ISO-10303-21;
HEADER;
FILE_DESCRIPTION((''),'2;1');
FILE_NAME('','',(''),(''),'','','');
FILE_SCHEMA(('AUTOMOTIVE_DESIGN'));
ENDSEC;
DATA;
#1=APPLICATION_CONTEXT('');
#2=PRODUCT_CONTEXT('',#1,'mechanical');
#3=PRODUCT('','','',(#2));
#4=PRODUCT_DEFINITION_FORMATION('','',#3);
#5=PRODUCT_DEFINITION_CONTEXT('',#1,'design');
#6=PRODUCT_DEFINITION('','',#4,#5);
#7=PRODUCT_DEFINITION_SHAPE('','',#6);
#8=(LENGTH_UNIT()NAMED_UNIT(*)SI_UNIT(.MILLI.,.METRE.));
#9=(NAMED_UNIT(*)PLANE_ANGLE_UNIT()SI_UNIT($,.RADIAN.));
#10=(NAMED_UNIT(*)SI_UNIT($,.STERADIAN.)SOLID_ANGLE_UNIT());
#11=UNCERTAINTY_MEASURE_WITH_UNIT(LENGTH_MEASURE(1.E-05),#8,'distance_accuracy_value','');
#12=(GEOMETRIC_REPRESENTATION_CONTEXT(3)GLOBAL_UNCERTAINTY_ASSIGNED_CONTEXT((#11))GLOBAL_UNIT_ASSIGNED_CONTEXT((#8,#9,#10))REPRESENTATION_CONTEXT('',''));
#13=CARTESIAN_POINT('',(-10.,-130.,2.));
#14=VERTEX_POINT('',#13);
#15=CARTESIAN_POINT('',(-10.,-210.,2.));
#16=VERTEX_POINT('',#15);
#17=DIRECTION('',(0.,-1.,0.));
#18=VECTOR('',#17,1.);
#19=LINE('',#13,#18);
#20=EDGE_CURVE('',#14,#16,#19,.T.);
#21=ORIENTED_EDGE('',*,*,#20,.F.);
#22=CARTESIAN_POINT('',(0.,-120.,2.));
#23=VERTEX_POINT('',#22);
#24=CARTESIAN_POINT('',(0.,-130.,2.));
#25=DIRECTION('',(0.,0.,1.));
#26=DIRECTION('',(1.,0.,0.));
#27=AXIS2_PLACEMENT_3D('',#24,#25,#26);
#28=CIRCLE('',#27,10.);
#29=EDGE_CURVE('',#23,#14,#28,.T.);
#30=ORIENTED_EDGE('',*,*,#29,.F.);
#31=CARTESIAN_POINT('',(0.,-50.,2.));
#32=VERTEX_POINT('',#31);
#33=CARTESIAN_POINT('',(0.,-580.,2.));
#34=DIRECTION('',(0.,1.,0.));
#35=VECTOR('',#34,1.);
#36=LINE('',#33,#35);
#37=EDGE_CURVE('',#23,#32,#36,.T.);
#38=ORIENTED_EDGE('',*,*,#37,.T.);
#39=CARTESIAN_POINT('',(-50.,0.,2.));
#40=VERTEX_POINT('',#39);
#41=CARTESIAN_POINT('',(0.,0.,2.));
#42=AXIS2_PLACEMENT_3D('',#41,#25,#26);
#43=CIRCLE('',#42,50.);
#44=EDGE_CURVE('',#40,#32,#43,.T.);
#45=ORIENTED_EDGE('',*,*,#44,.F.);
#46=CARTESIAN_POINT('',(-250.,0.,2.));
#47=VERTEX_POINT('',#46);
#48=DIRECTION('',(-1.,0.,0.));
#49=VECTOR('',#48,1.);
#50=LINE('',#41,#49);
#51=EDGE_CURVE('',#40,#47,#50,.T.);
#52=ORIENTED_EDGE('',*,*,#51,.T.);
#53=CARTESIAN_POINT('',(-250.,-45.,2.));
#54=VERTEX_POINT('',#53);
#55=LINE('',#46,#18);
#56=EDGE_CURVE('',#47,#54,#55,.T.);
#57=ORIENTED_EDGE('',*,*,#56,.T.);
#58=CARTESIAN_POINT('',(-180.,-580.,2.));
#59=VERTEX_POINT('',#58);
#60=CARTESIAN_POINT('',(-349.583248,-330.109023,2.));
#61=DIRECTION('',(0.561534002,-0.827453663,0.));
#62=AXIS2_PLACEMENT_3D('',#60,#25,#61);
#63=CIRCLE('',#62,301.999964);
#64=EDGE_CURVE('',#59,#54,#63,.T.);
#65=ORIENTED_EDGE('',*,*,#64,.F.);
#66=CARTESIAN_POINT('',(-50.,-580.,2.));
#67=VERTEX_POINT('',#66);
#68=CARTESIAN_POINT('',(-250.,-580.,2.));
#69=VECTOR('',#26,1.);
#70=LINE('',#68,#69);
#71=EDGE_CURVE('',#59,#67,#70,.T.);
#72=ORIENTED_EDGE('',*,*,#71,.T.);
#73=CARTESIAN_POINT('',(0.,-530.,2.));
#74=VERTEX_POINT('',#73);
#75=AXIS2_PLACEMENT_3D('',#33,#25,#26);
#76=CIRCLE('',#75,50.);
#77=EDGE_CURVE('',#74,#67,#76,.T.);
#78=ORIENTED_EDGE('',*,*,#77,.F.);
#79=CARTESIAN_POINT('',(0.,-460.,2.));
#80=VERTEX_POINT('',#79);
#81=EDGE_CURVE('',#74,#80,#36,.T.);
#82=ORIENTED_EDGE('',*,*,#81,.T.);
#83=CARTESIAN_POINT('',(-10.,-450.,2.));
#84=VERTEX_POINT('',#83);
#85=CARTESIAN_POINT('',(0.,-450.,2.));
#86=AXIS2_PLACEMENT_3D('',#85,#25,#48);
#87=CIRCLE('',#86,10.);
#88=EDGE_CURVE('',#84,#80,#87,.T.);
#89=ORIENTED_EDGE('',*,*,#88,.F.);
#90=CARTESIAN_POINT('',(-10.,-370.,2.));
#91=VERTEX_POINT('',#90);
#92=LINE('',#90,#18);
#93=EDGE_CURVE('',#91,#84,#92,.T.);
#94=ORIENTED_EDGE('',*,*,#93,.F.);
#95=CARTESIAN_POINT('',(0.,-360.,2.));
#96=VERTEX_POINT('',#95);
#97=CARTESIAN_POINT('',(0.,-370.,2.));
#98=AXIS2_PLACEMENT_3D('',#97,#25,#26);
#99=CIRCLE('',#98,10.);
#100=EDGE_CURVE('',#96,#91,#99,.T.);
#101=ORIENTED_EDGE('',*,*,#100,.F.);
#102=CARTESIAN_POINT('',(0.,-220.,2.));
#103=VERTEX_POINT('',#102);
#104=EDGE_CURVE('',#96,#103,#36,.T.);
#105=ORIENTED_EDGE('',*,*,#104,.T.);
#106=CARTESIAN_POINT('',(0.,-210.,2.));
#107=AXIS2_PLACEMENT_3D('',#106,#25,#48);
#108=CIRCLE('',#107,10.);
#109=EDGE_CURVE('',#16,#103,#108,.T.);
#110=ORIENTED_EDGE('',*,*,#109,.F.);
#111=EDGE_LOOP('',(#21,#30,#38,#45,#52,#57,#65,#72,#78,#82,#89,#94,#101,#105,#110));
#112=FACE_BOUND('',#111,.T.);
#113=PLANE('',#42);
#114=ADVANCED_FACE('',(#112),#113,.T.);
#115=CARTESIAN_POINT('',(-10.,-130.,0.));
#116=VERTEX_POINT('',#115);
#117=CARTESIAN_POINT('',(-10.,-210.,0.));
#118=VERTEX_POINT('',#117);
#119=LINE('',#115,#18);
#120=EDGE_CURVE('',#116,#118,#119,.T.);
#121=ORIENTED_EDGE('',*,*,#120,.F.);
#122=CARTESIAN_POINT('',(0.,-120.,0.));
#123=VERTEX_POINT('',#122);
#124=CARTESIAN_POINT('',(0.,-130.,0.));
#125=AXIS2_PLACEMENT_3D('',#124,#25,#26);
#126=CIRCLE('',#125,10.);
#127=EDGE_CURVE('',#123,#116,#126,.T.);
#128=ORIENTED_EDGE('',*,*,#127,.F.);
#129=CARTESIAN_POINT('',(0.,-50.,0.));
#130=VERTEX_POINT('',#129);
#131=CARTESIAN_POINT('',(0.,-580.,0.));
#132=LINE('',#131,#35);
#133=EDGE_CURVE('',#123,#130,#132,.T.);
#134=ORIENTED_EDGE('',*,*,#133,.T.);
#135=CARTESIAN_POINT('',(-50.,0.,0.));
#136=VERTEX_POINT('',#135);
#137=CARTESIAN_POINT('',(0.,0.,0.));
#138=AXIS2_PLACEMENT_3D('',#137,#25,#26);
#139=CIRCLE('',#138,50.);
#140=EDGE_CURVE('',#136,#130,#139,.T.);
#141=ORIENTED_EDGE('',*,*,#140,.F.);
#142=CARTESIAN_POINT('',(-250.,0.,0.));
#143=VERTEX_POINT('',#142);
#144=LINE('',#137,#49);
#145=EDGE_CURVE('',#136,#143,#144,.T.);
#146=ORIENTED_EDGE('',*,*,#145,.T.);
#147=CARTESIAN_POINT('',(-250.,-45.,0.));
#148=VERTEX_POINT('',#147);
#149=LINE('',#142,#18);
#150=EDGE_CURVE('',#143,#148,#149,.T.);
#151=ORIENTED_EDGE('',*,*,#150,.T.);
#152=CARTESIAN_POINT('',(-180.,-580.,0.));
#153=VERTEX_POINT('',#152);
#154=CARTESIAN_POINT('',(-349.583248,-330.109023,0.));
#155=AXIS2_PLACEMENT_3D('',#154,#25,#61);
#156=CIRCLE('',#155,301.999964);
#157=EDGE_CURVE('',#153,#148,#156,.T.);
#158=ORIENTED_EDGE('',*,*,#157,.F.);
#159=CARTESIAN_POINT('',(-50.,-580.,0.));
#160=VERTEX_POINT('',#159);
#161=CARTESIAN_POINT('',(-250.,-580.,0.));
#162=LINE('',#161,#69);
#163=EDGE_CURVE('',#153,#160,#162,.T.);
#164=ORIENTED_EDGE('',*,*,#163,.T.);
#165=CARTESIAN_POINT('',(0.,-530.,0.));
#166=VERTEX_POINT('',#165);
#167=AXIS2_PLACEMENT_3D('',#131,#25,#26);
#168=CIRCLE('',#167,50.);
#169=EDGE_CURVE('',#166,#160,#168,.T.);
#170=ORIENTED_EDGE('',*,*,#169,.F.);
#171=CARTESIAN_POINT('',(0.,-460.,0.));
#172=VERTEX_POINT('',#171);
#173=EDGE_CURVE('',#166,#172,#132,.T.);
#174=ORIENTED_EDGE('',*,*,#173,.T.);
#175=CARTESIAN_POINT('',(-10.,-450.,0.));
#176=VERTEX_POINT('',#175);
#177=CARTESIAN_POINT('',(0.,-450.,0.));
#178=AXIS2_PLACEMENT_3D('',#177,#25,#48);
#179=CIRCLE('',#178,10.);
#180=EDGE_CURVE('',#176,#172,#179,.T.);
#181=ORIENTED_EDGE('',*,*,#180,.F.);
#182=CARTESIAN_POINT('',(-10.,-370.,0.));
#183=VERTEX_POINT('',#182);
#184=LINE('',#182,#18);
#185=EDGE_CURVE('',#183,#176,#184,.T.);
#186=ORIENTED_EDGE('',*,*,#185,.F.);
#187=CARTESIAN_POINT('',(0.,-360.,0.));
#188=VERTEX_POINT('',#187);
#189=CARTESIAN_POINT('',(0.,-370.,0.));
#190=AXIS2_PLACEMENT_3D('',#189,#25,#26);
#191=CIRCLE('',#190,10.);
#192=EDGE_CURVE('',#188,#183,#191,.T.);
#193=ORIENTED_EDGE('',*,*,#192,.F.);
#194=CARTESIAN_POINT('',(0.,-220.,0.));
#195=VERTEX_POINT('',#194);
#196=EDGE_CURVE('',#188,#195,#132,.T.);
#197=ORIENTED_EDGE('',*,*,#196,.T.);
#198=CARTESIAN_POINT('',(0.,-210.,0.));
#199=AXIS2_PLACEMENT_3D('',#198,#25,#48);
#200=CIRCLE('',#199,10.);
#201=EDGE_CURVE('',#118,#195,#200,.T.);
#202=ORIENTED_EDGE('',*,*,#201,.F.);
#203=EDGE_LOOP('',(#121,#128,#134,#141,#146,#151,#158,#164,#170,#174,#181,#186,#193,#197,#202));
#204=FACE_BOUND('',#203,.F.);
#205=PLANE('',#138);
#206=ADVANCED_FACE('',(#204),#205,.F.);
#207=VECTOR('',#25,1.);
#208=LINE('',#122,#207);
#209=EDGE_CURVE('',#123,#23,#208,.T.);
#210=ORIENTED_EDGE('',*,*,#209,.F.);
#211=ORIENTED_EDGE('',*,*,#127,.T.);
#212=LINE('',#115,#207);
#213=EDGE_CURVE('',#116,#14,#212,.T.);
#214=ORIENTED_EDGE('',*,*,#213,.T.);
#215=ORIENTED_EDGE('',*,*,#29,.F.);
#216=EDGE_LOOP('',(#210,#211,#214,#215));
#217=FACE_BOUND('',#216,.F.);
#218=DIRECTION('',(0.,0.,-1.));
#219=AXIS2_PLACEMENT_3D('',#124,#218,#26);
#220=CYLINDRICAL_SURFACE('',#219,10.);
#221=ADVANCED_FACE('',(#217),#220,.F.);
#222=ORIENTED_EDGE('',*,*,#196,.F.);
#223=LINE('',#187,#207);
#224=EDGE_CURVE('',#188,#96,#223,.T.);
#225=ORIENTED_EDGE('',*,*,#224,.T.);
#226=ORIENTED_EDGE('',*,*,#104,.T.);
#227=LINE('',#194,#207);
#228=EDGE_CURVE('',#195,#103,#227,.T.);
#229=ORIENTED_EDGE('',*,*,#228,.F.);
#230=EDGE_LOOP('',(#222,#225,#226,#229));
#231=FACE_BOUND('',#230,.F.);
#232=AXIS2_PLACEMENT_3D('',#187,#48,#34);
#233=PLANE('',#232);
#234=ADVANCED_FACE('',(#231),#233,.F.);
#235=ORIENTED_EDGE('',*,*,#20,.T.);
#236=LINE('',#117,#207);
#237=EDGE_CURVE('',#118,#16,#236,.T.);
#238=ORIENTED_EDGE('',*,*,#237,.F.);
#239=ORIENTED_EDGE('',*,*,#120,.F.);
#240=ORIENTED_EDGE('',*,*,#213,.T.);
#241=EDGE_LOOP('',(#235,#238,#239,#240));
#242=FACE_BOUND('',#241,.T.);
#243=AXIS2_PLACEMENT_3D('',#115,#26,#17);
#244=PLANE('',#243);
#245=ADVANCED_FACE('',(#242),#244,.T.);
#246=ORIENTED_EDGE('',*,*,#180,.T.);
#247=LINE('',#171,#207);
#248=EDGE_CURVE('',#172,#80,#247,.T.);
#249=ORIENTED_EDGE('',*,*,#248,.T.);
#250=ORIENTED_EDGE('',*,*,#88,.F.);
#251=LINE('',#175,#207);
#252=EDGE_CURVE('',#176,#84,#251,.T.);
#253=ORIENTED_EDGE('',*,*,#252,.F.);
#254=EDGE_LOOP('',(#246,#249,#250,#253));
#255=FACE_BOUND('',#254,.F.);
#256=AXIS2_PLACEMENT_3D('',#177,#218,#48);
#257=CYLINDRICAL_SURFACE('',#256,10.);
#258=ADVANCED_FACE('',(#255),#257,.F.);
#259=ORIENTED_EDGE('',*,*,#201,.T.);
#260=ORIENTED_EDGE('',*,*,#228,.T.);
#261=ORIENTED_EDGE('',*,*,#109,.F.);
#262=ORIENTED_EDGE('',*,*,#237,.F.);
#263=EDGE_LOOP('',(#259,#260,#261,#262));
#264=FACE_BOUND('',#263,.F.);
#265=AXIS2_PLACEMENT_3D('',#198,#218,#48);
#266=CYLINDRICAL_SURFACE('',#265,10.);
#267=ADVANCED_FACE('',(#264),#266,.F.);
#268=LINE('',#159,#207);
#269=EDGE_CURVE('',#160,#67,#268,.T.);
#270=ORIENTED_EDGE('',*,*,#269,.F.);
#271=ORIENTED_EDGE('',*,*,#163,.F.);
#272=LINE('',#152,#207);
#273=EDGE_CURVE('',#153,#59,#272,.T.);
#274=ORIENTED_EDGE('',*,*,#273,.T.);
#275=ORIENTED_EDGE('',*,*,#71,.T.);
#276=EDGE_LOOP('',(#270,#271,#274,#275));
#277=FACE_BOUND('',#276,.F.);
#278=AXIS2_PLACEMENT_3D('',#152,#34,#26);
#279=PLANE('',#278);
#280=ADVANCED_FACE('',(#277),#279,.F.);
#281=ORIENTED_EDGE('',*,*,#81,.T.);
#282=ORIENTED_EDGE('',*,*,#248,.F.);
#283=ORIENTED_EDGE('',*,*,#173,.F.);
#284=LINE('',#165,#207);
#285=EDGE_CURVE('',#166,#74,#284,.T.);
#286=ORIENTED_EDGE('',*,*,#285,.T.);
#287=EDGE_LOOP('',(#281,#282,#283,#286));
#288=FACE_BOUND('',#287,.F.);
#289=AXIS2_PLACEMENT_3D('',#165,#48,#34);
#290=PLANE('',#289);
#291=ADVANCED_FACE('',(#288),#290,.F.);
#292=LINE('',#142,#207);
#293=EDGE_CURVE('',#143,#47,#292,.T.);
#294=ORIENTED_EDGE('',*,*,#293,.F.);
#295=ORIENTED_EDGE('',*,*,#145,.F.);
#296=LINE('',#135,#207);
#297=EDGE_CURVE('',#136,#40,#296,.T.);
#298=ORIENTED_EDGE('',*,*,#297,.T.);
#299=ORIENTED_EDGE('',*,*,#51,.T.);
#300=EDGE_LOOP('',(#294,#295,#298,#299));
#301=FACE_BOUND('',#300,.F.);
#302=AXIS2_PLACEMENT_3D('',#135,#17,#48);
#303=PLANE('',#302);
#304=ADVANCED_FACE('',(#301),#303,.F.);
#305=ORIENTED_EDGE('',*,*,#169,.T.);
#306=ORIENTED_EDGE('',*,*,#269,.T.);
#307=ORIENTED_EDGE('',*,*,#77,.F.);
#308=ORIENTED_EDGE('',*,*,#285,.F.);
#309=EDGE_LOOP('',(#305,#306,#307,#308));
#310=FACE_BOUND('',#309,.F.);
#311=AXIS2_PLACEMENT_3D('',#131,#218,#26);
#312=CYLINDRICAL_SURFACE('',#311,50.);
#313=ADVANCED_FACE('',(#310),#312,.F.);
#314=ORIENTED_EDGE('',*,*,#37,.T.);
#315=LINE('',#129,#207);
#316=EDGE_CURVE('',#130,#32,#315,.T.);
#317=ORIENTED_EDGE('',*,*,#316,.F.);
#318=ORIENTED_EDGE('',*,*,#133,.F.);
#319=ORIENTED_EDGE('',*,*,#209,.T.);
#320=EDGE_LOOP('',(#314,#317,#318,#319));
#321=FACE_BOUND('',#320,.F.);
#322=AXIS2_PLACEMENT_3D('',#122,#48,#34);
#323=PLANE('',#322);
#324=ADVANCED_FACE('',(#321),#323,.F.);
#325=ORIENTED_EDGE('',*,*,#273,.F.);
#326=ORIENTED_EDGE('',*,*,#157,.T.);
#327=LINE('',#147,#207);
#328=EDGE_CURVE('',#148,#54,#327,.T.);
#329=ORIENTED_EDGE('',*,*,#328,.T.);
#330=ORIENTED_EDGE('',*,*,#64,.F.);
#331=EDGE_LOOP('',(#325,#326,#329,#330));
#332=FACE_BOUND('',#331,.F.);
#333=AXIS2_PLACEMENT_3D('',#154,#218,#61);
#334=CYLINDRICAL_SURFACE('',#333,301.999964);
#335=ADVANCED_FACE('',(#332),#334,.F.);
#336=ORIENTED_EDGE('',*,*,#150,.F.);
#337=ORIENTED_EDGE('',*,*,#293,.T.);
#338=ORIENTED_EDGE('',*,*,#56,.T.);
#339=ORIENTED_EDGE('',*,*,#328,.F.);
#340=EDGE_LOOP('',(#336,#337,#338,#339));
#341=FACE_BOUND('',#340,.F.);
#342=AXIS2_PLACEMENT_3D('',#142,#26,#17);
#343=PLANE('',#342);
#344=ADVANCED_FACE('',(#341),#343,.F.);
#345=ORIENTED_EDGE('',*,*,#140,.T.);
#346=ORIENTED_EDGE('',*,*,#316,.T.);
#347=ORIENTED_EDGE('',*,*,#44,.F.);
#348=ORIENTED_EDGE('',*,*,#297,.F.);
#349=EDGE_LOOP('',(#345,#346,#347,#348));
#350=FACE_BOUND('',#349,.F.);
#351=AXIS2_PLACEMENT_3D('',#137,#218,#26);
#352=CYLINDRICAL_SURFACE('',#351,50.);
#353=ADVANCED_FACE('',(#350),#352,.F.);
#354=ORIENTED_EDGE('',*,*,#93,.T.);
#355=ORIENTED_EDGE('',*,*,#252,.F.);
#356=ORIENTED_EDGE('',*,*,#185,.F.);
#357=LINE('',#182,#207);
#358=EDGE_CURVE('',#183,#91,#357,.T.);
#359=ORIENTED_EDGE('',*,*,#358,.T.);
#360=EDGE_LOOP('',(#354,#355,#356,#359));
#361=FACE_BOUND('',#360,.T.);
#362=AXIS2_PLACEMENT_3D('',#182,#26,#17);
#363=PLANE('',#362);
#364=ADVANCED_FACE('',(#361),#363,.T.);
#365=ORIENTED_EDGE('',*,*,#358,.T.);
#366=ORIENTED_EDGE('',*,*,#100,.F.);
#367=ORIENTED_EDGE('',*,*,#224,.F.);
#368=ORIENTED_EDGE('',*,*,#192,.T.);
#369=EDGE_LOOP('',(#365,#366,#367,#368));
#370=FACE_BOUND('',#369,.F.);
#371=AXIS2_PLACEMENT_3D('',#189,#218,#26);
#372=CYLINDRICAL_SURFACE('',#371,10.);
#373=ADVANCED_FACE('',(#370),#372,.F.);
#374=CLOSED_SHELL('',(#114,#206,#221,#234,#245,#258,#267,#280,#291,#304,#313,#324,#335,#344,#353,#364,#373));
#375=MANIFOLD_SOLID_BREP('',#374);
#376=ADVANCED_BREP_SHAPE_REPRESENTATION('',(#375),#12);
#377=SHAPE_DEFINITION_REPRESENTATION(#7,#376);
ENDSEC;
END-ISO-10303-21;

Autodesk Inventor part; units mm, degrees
ref_plane "YZ Plane" through (0, 0, 0) normal (1, 0, 0) x (0, 1, 0)
ref_plane "XZ Plane" through (0, 0, 0) normal (0, 1, 0) x (-1, 0, 0)
ref_plane "XY Plane" through (0, 0, 0) normal (0, 0, 1) x (1, 0, 0)
sketch "Sketch1" plane through (0, 0, 0) normal (0, 0, 1) x (1, 0, 0)
  line L0 (-250, -580) -> (0, -580)
  line L1 (0, -580) -> (0, 0)
  line L2 (0, 0) -> (-250, 0)
  line L3 (-250, 0) -> (-250, -580)
  line L4 (-250, -580) -> (0, 0) construction
  line L5 (0, -580) -> (-250, 0) construction
  arc A0 (-180, -580) -> (-250, -45) centre (-349.5833, -330.109) ccw
  circle A1 centre (0, -580) radius 50
  circle A2 centre (0, 0) radius 50
  line L6 (0, -130) -> (0, -210) construction
  line L7 (-10, -130) -> (-10, -210)
  line L8 (10, -210) -> (10, -130)
  arc A3 (10, -130) -> (-10, -130) centre (0, -130) ccw
  arc A4 (-10, -210) -> (10, -210) centre (0, -210) ccw
  line L9 (0, -370) -> (0, -450) construction
  line L10 (-10, -370) -> (-10, -450)
  line L11 (10, -450) -> (10, -370)
  arc A5 (10, -370) -> (-10, -370) centre (0, -370) ccw
  arc A6 (-10, -450) -> (10, -450) centre (0, -450) ccw
  point P0 (0, -170)
  point P1 (0, -410)
  point P2 (0, -120)
  point P3 (0, -50)
  point P4 (-50, 0)
  point P5 (-50, -580)
  point P6 (0, -530)
  point P7 (0, -460)
  point P8 (0, -360)
  point P9 (0, -220)
  dimension "d22" = 580
  dimension "d23" = 250
  dimension "d24" = 302
  dimension "d25" = 45
  dimension "d26" = 180
  dimension "d28" = 100
  dimension "d29" = 20
  dimension "d30" = 80
  dimension "d31" = 170
  dimension "d32" = 170
extrude "Plate1" add sketch "Sketch1" along normal blind 2 contours A0 L3 L2 A2 L1 A3 L7 A4 A5 L10 A6 A1 L0
sketch "Sketch2" plane through (0, 0, 0) normal (0, 0, -1) x (-1, 0, 0)
  line L0 (20, -20) -> (220, -20) construction
  line L1 (220, -20) -> (220, -40) construction
  line L2 (220, -40) -> (20, -40) construction
  line L3 (20, -40) -> (20, -20) construction
  line L4 (50, 0) -> (250, 0) projected
  line L5 (0, -120) -> (0, -50) projected
  point P0 (0, 0)
  point P1 (0, -580)
  point P2 (0, 0)
  dimension "d6" = 200
  dimension "d9" = 20
  dimension "d10" = 20
  dimension "d11" = 20
mark "Mark1"
equation "\"d2\" = Thickness"
equation "\"d32\" = d31"
equation "\"BendReliefWidth\" = Thickness"
equation "\"BendReliefDepth\" = 0.5 * Thickness"
equation "\"CornerReliefSize\" = 4 * Thickness"
equation "\"MinimumRemnant\" = 2 * Thickness"
equation "\"TransitionRadius\" = BendRadius"
equation "\"JacobiRadiusSize\" = BendRadius"
equation "\"GapSize\" = Thickness"
equation "\"Thickness\" = 2"
equation "\"BendRadius\" = 2.75"
properties part number "TRM 013 top main" material "AISI 304"
